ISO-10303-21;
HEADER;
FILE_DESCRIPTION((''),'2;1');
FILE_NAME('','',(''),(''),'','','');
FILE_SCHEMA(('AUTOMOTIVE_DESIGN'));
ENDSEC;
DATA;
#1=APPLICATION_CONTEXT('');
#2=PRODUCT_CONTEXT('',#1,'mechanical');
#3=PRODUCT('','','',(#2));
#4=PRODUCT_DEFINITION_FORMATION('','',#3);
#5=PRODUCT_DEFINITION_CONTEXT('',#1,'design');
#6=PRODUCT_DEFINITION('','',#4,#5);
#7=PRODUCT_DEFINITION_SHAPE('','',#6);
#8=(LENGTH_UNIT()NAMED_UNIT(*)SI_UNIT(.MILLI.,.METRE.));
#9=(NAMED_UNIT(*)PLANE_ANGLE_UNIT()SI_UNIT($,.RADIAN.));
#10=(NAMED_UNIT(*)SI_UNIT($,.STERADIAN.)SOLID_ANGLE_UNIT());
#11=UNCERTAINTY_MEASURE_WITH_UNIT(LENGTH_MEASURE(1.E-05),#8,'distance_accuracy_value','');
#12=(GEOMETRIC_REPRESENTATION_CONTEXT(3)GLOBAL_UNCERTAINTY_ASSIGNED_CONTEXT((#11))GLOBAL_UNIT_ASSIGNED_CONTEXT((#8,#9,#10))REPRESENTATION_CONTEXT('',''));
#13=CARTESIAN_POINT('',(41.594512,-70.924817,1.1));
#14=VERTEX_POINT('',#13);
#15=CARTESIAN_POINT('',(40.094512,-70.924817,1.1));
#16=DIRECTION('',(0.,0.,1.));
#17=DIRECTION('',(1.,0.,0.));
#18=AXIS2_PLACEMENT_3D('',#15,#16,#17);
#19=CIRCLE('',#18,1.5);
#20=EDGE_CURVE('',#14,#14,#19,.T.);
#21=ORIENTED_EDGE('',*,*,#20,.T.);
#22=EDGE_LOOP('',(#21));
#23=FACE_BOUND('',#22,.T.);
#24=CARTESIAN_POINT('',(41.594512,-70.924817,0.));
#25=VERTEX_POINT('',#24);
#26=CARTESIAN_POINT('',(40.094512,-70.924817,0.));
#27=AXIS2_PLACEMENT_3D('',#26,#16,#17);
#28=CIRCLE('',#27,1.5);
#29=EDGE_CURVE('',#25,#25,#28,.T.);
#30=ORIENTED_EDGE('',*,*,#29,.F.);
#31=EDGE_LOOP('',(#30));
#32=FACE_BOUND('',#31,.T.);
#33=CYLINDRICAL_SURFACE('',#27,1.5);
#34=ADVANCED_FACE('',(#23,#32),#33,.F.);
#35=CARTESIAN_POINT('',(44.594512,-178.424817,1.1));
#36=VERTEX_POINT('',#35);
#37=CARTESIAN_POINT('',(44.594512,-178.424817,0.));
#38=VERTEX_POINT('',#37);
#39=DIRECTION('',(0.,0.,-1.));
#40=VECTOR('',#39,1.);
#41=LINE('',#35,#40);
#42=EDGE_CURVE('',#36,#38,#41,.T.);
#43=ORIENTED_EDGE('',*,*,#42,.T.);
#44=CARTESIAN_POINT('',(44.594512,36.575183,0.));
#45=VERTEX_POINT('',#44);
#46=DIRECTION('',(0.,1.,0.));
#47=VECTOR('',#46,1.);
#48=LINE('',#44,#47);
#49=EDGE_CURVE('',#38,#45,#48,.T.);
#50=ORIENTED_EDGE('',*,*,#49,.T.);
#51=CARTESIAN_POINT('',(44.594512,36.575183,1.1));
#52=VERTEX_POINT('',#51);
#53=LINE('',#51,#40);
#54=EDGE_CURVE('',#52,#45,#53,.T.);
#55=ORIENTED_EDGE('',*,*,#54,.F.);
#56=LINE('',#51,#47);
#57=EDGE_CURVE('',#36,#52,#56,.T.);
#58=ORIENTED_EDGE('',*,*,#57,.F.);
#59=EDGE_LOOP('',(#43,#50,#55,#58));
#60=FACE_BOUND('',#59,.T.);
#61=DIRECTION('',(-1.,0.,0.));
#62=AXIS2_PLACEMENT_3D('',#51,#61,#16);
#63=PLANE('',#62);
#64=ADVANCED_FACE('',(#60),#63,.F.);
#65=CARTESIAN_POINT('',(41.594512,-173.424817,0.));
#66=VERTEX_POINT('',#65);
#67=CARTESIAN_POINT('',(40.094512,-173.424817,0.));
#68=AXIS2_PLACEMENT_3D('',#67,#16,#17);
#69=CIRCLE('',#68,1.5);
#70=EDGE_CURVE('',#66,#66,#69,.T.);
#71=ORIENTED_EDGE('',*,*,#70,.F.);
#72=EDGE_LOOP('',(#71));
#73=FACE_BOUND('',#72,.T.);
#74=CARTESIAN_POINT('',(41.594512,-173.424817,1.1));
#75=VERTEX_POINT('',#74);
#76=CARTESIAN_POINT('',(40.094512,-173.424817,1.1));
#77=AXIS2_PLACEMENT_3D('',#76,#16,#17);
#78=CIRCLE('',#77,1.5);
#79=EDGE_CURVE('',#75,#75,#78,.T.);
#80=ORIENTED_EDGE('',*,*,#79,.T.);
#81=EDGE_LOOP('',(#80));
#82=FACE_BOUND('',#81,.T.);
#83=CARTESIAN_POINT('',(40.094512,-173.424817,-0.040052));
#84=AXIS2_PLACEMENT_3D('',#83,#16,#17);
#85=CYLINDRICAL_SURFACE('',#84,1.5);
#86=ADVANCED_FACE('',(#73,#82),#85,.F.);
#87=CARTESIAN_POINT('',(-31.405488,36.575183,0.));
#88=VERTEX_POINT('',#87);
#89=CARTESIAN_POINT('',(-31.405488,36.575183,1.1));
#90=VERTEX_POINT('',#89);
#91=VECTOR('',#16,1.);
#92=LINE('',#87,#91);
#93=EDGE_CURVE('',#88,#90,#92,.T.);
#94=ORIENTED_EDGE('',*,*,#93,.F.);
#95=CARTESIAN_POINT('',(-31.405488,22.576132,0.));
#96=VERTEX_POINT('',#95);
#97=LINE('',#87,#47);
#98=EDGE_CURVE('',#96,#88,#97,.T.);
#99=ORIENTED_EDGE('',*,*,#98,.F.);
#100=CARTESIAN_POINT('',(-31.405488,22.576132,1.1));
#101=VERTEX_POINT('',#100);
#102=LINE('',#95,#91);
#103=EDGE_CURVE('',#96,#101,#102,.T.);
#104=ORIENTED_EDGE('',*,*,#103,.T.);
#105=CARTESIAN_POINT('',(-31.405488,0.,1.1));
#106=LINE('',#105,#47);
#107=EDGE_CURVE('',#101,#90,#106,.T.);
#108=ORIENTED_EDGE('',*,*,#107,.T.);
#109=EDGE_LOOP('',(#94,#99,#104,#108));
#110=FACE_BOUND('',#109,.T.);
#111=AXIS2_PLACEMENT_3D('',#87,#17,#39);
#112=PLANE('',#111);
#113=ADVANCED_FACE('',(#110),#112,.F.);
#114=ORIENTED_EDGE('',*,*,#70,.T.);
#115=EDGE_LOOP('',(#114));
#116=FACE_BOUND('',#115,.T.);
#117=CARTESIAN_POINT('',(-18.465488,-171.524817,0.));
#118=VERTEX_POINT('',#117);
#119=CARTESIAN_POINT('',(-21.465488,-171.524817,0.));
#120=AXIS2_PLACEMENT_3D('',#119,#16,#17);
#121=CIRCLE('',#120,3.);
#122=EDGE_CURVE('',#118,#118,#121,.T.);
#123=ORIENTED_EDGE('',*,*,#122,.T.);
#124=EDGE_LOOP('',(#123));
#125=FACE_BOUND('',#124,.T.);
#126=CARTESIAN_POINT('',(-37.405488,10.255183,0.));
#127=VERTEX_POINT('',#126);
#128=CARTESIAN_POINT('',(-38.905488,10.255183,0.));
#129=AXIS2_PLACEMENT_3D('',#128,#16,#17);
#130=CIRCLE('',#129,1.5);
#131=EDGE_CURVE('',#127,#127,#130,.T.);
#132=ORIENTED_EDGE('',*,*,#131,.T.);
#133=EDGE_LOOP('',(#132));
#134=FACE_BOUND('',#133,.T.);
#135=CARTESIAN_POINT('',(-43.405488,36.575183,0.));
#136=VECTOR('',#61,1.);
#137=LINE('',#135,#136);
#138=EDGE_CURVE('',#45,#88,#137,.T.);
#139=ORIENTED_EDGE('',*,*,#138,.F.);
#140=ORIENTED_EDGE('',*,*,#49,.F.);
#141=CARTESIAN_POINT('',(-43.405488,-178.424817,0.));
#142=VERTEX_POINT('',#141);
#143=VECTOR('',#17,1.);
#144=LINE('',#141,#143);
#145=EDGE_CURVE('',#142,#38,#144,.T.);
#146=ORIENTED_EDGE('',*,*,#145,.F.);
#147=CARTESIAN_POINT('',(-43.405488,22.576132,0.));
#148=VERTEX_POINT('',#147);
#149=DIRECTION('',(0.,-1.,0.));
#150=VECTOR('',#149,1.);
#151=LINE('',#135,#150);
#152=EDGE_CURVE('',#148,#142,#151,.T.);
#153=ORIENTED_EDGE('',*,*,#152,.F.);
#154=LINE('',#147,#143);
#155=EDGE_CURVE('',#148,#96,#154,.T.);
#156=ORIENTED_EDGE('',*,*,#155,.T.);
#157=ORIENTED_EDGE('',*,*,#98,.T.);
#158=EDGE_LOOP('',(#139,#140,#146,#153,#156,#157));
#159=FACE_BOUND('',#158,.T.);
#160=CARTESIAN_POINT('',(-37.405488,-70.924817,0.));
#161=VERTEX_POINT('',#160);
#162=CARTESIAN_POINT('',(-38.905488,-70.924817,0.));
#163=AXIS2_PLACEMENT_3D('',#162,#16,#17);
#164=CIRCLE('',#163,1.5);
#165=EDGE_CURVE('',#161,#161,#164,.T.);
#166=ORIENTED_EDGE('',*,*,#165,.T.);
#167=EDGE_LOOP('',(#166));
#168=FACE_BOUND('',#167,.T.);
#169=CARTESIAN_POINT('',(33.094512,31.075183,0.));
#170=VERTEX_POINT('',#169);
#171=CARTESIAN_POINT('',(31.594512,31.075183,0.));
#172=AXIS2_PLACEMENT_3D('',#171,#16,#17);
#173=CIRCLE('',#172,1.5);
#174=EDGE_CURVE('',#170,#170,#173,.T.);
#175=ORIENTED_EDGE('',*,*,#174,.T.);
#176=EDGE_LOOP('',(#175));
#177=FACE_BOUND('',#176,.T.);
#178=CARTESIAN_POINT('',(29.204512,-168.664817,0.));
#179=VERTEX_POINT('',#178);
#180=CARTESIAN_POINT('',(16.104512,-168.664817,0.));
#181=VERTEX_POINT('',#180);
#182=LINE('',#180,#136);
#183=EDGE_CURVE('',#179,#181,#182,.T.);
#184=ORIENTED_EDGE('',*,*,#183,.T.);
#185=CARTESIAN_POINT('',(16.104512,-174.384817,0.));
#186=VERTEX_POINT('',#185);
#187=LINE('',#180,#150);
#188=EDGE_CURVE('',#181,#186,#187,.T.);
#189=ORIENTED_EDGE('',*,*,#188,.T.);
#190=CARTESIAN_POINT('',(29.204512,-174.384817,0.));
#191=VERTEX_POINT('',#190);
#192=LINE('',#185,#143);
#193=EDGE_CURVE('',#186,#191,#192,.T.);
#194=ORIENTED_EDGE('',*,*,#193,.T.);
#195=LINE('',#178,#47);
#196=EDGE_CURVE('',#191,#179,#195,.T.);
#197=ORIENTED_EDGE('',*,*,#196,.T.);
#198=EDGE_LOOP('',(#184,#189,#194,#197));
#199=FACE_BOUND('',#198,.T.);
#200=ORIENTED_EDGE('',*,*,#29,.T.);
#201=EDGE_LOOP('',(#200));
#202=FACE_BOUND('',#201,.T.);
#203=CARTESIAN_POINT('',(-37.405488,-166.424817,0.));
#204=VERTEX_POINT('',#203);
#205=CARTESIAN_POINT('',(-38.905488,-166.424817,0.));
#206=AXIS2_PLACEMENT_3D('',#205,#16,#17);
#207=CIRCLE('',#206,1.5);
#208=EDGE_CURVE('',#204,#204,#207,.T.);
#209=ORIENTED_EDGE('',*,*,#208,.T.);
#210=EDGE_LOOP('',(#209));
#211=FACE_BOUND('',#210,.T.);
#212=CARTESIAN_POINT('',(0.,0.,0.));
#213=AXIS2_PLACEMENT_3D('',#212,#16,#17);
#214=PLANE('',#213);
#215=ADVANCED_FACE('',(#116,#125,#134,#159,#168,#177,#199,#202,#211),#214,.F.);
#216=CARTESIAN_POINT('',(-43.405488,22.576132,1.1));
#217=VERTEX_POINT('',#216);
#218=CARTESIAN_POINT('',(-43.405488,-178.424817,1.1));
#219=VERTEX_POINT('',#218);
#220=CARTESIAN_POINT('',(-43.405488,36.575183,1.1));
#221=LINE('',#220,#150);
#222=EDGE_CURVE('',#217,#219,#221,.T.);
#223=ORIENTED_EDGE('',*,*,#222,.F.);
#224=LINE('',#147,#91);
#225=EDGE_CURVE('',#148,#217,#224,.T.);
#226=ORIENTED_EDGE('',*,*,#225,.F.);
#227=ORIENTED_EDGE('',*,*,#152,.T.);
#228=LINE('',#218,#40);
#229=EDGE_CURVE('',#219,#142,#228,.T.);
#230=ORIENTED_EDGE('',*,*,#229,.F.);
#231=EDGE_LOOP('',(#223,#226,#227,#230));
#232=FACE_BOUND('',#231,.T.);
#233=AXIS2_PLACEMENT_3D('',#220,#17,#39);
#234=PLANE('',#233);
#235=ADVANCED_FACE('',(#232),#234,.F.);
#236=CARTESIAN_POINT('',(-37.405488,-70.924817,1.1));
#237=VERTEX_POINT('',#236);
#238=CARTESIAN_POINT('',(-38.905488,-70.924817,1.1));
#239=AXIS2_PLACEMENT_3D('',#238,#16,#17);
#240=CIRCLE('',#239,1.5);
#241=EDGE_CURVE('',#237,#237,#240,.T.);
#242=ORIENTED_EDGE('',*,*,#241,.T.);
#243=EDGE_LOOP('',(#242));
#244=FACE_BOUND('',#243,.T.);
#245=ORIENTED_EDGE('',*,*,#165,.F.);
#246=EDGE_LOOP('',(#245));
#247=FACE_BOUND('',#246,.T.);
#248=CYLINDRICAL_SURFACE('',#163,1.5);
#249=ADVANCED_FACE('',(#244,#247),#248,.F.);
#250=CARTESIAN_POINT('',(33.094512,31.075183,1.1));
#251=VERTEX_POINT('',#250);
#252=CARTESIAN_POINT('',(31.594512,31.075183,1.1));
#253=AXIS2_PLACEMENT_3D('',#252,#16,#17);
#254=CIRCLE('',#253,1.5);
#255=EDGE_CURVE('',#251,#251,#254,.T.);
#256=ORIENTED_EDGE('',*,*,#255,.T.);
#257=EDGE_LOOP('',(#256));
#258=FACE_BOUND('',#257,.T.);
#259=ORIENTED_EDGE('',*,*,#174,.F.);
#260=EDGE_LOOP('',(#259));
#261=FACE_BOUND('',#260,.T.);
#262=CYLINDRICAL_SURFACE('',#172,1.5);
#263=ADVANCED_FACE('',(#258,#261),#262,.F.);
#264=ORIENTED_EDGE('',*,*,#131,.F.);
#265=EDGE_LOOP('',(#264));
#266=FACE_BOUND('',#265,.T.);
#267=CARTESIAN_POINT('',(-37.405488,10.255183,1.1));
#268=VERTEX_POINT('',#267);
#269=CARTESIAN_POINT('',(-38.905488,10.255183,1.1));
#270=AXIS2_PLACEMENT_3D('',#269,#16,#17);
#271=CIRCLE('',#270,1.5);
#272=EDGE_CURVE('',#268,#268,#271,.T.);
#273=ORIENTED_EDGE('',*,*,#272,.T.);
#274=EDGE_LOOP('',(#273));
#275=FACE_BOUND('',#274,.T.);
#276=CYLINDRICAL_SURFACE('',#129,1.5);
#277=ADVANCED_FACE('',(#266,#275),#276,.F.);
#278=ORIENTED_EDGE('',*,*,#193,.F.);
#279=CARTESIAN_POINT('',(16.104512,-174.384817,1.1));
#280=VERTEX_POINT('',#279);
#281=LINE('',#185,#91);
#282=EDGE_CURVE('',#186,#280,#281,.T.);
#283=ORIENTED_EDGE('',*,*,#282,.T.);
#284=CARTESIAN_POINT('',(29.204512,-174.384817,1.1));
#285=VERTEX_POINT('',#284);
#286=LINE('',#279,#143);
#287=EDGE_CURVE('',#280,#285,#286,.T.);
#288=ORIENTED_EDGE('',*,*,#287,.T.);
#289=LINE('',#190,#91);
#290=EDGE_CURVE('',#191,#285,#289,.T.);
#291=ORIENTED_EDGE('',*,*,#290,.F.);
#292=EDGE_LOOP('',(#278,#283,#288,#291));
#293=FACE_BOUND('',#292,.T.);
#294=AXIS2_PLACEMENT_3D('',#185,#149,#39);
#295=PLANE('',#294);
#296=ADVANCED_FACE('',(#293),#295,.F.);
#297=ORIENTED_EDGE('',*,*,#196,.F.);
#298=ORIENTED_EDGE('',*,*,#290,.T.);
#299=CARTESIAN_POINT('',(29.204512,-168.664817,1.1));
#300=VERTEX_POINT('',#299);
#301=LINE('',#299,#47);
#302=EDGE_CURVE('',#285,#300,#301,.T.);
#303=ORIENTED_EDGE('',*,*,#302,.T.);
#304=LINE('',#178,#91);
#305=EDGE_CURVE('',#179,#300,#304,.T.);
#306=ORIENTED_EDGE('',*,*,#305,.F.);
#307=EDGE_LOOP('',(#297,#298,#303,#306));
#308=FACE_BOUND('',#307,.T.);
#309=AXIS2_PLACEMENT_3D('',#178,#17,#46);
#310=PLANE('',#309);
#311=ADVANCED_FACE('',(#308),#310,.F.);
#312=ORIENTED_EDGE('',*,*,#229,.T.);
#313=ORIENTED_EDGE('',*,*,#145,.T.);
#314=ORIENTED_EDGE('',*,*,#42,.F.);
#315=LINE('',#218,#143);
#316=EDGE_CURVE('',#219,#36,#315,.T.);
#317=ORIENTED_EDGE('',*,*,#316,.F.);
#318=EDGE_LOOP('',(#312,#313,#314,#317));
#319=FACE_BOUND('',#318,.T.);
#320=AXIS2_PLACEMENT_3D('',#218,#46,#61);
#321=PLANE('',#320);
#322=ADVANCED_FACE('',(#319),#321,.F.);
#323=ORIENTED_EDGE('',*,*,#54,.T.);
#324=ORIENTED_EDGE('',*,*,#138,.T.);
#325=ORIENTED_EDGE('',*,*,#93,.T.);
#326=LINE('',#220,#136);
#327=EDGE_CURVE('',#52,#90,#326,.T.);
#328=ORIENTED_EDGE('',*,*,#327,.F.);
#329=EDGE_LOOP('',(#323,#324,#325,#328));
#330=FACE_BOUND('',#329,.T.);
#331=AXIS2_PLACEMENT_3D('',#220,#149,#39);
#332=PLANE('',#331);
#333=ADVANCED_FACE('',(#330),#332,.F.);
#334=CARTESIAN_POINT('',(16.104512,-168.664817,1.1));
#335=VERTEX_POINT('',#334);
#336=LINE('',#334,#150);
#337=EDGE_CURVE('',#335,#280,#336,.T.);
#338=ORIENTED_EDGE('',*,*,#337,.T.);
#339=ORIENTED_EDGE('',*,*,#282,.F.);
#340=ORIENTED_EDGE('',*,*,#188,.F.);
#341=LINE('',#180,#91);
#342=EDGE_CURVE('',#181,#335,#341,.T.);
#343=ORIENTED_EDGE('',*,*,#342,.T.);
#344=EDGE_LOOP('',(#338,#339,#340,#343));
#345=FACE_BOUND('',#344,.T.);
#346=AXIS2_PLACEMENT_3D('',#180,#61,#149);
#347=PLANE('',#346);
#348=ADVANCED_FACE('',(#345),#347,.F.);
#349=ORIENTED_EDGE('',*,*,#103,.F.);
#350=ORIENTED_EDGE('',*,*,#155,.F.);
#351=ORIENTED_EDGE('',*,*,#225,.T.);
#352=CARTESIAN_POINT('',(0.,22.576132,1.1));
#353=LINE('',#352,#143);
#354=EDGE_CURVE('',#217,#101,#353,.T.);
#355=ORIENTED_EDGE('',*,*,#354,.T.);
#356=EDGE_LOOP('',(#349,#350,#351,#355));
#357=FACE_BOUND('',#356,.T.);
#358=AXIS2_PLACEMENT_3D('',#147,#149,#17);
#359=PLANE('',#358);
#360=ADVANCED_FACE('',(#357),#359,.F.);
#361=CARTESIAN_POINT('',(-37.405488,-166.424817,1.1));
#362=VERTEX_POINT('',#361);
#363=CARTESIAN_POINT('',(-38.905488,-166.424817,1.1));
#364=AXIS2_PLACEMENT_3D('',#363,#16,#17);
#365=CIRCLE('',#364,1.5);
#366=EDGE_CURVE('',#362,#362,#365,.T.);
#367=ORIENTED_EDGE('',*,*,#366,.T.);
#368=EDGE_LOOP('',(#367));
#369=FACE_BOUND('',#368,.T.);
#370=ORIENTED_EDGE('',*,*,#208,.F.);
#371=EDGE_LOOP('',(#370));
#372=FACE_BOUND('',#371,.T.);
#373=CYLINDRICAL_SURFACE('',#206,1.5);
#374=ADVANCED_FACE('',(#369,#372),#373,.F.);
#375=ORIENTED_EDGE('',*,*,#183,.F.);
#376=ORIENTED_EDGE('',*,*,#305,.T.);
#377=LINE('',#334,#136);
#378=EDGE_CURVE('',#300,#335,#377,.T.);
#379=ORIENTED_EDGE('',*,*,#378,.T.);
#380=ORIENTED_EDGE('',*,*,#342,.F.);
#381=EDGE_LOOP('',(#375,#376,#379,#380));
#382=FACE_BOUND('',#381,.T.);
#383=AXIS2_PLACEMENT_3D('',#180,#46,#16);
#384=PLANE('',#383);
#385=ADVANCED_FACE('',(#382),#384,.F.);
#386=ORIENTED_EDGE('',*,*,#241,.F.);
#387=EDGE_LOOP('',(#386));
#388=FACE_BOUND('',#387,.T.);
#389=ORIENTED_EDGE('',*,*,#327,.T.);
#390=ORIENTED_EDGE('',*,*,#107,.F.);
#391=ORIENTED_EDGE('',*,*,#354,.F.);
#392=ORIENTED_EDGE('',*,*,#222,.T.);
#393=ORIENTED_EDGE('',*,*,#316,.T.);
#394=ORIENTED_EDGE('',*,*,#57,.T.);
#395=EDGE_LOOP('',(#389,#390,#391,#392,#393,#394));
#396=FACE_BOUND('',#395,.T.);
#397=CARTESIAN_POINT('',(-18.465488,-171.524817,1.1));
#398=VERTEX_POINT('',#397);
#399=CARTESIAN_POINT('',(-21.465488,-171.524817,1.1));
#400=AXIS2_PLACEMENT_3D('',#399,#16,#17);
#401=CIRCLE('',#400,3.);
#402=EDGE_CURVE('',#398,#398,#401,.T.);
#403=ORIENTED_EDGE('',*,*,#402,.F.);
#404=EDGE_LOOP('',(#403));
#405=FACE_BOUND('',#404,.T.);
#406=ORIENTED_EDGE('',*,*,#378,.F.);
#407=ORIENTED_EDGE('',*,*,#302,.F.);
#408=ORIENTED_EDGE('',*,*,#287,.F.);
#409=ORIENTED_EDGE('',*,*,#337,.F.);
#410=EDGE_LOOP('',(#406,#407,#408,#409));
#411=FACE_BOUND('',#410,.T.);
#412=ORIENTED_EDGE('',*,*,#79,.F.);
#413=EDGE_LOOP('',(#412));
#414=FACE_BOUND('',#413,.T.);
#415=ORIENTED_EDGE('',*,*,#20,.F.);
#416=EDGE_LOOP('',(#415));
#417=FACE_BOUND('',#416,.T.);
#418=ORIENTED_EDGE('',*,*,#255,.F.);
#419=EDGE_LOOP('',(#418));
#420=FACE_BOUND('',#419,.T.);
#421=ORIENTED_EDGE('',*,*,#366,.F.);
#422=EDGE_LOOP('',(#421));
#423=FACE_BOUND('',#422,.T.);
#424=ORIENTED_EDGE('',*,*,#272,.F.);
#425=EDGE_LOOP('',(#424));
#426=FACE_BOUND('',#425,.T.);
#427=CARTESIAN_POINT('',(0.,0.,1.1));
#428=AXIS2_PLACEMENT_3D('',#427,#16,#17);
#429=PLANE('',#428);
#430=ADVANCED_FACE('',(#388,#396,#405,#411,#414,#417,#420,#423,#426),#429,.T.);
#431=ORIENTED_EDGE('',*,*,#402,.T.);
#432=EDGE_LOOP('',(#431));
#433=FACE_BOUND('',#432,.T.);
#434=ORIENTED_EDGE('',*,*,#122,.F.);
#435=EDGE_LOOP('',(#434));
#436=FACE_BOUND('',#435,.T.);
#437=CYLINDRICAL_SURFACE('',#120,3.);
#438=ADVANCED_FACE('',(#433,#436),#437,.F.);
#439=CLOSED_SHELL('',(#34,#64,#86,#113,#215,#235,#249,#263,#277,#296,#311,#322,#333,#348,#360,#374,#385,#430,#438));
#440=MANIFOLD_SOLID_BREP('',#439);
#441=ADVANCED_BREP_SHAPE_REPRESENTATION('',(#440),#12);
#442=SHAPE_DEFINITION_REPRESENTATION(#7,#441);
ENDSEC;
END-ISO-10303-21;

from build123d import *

# Parameters (mm, degrees)
SKETCH3_W              = 88
SKETCH3_H              = 215
BOSS_EXTRUDE3_DEPTH    = 1.1
CUT_EXTRUDE1_OUTLINE_W = 12
CUT_EXTRUDE1_OUTLINE_H = 13.99905087
CUT_EXTRUDE1_OUTLINE_R = 1.5
CUT_EXTRUDE1_DEPTH     = 1.1
SKETCH4_R              = 3
CUT_EXTRUDE2_DEPTH     = 1.1
SKETCH5_W              = 13.1
SKETCH5_H              = 5.72
CUT_EXTRUDE3_DEPTH     = 1.1


# Read off the part's stored shape, not the designer's step: Cut-Extrude1
with BuildPart() as part:
    # Sketch3 → Boss-Extrude3 (new body)
    with BuildSketch(Plane.XY):
        with Locations((0.594511969, -70.924817192)):
            Rectangle(SKETCH3_W, SKETCH3_H)
    extrude(amount=BOSS_EXTRUDE3_DEPTH)

    # Cut-Extrude1 outline → Cut-Extrude1 (cut)
    with BuildSketch(Plane.XY):
        with Locations((-37.405488031, 29.575657373)):
            Rectangle(CUT_EXTRUDE1_OUTLINE_W, CUT_EXTRUDE1_OUTLINE_H)
        with Locations((31.594511969, 31.075182808)):
            Circle(CUT_EXTRUDE1_OUTLINE_R)
        with Locations((-38.905488031, -166.424817192)):
            Circle(CUT_EXTRUDE1_OUTLINE_R)
        with Locations((-38.905488031, -70.924817192)):
            Circle(CUT_EXTRUDE1_OUTLINE_R)
        with Locations((-38.905488031, 10.255182808)):
            Circle(CUT_EXTRUDE1_OUTLINE_R)
        with Locations((40.094511969, -70.924817192)):
            Circle(CUT_EXTRUDE1_OUTLINE_R)
        with Locations((40.094511969, -173.424817192)):
            Circle(CUT_EXTRUDE1_OUTLINE_R)
    extrude(amount=CUT_EXTRUDE1_DEPTH, mode=Mode.SUBTRACT)

    # Sketch4 → Cut-Extrude2 (cut)
    with BuildSketch(Plane.XY.offset(1.1)):
        with Locations((-21.465488031, -171.524817192)):
            Circle(SKETCH4_R)
    extrude(amount=-CUT_EXTRUDE2_DEPTH, mode=Mode.SUBTRACT)

    # Sketch5 → Cut-Extrude3 (cut)
    with BuildSketch(Plane.XY.offset(1.1)):
        with Locations((22.654511969, -171.524817192)):
            Rectangle(SKETCH5_W, SKETCH5_H)
    extrude(amount=-CUT_EXTRUDE3_DEPTH, mode=Mode.SUBTRACT)


solid = part.part
